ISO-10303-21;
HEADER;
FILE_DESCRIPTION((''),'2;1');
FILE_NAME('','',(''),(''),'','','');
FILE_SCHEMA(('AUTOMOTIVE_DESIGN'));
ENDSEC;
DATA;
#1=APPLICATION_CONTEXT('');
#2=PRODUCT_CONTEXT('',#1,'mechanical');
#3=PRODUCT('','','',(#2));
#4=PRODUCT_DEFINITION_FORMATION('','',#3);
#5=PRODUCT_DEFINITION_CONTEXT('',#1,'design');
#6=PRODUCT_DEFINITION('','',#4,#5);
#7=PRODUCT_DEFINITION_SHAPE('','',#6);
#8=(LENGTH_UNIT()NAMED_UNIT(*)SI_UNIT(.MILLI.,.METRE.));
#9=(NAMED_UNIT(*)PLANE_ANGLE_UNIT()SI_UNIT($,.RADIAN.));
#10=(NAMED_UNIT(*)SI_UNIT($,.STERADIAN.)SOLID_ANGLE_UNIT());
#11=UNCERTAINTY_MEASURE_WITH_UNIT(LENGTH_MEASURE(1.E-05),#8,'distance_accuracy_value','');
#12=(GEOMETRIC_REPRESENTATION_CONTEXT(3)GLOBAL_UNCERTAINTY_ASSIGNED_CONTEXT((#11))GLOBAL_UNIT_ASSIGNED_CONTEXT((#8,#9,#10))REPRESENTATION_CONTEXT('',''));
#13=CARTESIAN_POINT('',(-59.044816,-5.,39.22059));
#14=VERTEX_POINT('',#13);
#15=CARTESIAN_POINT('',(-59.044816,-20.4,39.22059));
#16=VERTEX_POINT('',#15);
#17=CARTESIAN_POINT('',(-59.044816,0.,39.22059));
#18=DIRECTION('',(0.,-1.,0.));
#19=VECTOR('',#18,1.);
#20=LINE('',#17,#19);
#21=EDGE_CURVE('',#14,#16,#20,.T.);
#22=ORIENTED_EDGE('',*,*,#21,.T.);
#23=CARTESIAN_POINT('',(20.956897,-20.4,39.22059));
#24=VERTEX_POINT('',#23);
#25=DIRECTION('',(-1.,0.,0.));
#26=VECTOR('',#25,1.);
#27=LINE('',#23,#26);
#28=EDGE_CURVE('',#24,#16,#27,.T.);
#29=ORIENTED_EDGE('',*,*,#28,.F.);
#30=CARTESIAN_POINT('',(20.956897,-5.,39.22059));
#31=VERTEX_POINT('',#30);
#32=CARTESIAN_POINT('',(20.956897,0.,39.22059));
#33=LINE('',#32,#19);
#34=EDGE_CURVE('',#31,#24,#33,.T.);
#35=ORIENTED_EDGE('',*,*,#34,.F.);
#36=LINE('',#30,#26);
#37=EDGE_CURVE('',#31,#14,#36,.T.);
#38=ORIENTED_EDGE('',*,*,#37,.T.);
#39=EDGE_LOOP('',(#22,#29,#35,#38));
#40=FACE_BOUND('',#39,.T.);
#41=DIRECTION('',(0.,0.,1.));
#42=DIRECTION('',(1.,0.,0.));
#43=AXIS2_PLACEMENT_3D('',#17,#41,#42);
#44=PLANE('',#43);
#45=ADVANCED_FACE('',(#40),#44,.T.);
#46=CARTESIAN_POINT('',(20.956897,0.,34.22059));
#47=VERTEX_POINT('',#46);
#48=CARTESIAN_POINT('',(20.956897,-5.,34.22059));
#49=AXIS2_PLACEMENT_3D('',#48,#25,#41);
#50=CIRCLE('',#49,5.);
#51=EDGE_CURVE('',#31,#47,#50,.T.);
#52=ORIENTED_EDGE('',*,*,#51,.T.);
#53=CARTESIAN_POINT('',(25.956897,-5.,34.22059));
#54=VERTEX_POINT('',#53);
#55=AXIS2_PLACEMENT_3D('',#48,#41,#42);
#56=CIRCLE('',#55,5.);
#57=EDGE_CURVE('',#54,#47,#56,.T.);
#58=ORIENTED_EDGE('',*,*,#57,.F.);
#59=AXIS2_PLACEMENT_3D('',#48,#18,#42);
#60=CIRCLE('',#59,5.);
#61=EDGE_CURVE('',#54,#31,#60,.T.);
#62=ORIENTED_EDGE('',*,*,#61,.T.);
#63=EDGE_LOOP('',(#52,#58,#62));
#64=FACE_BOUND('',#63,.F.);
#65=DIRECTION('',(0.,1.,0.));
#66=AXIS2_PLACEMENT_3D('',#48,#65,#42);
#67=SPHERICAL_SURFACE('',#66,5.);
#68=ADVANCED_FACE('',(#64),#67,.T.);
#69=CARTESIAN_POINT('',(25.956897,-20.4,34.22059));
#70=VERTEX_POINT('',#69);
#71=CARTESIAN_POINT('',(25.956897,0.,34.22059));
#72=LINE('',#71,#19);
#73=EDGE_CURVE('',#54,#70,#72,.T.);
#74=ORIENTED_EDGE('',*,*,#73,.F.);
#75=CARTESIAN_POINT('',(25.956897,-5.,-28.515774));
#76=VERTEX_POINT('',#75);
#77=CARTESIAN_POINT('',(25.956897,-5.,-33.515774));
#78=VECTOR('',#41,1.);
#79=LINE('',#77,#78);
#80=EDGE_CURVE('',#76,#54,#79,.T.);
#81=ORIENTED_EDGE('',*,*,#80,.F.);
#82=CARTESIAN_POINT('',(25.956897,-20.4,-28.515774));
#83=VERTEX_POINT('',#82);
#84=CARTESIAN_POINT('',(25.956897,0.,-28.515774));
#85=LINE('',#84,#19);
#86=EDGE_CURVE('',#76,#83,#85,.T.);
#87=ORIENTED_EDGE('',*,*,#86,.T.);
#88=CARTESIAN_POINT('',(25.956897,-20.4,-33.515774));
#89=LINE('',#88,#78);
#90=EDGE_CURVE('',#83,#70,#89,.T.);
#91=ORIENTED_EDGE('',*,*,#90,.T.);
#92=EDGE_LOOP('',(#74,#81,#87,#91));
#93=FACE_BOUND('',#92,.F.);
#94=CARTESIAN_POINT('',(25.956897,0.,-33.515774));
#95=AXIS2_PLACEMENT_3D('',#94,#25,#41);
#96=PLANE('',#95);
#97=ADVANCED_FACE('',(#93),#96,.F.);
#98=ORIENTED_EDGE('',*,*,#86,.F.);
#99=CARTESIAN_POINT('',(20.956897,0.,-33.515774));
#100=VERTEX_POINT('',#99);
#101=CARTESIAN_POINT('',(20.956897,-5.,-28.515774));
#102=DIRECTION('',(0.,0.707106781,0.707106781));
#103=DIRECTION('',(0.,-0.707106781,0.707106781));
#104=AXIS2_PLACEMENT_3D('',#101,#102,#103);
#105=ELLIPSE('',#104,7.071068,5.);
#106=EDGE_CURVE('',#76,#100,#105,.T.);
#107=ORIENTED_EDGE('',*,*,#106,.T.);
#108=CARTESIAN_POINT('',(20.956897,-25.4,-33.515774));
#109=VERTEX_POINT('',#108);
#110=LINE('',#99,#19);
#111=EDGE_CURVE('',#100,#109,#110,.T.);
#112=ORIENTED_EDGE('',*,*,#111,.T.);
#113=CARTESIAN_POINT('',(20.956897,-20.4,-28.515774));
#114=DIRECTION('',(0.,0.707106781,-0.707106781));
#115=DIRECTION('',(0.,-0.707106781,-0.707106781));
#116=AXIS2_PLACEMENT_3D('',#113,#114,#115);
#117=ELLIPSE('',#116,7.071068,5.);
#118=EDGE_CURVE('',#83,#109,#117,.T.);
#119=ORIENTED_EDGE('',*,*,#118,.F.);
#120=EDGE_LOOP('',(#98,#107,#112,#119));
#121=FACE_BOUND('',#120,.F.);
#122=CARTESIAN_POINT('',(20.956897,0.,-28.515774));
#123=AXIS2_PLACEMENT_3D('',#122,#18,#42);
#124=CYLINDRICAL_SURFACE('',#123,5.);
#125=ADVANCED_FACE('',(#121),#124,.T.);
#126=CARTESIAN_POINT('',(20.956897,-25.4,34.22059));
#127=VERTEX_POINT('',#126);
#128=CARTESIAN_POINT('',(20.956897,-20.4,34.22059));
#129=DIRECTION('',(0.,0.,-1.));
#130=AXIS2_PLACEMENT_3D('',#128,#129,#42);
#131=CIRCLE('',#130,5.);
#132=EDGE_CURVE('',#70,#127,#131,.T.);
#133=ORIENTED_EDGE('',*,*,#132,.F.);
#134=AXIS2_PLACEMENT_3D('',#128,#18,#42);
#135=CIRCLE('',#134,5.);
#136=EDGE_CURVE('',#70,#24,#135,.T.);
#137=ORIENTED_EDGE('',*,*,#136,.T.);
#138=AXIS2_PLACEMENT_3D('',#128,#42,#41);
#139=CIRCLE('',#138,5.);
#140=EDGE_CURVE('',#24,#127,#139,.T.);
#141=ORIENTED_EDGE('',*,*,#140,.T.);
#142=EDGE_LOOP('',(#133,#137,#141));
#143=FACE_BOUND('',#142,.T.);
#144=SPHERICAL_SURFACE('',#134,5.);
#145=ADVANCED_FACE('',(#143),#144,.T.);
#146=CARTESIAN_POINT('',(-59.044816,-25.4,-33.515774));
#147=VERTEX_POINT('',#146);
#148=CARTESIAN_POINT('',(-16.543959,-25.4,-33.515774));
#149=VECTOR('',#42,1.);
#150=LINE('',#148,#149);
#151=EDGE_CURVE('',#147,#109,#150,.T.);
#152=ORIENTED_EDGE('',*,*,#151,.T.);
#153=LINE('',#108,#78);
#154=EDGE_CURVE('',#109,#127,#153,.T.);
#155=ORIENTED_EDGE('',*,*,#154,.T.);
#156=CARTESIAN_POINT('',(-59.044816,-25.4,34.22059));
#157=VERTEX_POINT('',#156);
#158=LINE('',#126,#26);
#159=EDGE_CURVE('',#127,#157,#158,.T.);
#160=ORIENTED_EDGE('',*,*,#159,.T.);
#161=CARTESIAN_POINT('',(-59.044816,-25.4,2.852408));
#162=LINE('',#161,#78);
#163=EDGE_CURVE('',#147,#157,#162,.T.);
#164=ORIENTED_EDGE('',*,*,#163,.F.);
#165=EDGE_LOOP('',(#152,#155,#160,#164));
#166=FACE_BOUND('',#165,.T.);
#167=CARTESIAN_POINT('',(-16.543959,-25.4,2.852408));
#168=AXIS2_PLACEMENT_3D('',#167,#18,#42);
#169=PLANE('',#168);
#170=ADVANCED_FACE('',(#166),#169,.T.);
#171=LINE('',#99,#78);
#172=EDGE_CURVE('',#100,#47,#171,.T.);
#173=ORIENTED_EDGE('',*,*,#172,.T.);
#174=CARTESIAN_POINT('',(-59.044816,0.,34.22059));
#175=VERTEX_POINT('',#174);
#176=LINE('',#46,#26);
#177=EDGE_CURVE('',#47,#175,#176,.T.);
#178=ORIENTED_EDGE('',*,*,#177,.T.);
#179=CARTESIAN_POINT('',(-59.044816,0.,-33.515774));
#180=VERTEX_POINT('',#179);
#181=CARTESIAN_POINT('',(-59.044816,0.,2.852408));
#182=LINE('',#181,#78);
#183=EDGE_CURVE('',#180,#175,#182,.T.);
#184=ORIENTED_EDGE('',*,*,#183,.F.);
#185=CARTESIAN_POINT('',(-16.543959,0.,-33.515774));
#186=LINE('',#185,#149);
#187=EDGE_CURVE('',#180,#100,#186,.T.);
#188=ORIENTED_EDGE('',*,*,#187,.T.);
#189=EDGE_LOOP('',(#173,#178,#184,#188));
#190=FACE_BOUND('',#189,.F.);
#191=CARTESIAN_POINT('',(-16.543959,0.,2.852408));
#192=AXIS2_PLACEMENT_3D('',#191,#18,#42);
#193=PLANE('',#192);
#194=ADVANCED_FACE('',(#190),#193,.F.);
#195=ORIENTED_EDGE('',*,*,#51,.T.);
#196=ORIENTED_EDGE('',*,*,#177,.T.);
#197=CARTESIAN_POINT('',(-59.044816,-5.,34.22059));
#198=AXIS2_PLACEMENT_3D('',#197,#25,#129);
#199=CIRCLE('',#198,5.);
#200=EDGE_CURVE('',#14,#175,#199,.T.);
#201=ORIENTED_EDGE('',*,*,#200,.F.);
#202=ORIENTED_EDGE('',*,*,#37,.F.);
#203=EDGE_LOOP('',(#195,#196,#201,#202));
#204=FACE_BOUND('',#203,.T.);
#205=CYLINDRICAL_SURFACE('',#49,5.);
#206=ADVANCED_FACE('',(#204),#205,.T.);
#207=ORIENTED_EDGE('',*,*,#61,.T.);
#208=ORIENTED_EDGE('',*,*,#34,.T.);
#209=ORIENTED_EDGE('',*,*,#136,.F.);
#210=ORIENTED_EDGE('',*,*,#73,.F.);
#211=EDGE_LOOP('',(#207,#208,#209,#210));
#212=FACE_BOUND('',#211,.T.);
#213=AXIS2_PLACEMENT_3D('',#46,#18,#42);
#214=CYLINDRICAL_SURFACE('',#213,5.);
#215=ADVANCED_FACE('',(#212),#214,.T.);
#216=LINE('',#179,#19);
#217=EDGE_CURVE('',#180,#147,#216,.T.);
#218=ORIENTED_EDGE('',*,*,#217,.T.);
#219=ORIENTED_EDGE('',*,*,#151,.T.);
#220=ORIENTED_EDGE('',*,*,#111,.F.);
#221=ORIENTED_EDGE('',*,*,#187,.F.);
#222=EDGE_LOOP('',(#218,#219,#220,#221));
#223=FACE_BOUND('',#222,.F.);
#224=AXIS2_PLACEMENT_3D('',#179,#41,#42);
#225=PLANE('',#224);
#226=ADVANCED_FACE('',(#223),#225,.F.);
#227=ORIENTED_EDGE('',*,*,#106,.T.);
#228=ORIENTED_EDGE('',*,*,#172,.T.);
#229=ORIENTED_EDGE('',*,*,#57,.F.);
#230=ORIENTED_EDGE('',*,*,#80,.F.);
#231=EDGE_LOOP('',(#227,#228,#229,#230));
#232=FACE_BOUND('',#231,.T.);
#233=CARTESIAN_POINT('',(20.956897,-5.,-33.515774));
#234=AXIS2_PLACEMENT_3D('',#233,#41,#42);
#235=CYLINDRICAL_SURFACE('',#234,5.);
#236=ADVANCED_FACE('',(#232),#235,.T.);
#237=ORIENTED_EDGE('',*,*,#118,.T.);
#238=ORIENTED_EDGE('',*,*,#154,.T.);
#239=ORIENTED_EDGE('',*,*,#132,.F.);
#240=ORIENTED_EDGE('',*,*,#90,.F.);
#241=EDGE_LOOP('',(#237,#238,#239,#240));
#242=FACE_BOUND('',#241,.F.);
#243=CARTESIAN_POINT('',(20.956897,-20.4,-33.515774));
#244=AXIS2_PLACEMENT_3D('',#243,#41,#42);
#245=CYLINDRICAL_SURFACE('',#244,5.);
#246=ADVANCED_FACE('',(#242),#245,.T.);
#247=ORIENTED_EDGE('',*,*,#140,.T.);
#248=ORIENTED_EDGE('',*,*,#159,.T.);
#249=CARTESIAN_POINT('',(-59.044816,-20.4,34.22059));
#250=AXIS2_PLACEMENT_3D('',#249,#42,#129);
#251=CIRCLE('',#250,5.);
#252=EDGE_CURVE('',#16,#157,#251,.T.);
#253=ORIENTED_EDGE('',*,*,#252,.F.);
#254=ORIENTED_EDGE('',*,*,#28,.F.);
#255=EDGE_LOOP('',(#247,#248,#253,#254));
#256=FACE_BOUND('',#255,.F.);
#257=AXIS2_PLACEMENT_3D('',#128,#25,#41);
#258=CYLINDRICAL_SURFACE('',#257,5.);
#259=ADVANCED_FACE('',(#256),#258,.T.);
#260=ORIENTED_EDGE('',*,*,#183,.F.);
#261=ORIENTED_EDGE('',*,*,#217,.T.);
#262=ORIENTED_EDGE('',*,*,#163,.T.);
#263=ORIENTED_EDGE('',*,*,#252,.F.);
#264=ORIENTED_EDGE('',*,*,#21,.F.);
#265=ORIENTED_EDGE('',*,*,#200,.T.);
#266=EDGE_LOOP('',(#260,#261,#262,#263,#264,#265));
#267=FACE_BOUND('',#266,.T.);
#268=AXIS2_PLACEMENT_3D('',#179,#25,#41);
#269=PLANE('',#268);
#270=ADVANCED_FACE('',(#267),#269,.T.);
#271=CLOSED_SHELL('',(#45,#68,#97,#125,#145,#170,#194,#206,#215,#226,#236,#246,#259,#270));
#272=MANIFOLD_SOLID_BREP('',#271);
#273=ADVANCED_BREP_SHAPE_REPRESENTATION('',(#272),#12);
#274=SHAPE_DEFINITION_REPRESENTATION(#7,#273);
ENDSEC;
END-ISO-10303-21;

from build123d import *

# Parameters (mm, degrees)
F0_W     = 85.001712665
F0_H     = 72.736363858
F1_DEPTH = 25.4
F2_R     = 5
F3_R     = 5


with BuildPart() as f1:
    # F0 (on Front) → F1 (new body)
    with BuildSketch(Plane.XZ):
        with Locations((-16.5439592674, 2.8524082154)):
            Rectangle(F0_W, F0_H)
    extrude(amount=F1_DEPTH)

    # F2
    f2_edges = [f1.edges().sort_by_distance(p)[0] for p in [
        (25.956897, -12.7, 39.22059),
    ]]
    fillet(f2_edges, radius=F2_R)

    # F3
    f3_edges = [f1.edges().sort_by_distance(p)[0] for p in [
        (25.956897, 0, 0.352408),
        (25.956897, -12.7, 34.22059),
        (25.956897, -12.7, -33.515774),
        (25.956897, -25.4, 0.352408),
        (20.956897, -12.7, 39.22059),
    ]]
    fillet(f3_edges, radius=F3_R)


solid = f1.part
